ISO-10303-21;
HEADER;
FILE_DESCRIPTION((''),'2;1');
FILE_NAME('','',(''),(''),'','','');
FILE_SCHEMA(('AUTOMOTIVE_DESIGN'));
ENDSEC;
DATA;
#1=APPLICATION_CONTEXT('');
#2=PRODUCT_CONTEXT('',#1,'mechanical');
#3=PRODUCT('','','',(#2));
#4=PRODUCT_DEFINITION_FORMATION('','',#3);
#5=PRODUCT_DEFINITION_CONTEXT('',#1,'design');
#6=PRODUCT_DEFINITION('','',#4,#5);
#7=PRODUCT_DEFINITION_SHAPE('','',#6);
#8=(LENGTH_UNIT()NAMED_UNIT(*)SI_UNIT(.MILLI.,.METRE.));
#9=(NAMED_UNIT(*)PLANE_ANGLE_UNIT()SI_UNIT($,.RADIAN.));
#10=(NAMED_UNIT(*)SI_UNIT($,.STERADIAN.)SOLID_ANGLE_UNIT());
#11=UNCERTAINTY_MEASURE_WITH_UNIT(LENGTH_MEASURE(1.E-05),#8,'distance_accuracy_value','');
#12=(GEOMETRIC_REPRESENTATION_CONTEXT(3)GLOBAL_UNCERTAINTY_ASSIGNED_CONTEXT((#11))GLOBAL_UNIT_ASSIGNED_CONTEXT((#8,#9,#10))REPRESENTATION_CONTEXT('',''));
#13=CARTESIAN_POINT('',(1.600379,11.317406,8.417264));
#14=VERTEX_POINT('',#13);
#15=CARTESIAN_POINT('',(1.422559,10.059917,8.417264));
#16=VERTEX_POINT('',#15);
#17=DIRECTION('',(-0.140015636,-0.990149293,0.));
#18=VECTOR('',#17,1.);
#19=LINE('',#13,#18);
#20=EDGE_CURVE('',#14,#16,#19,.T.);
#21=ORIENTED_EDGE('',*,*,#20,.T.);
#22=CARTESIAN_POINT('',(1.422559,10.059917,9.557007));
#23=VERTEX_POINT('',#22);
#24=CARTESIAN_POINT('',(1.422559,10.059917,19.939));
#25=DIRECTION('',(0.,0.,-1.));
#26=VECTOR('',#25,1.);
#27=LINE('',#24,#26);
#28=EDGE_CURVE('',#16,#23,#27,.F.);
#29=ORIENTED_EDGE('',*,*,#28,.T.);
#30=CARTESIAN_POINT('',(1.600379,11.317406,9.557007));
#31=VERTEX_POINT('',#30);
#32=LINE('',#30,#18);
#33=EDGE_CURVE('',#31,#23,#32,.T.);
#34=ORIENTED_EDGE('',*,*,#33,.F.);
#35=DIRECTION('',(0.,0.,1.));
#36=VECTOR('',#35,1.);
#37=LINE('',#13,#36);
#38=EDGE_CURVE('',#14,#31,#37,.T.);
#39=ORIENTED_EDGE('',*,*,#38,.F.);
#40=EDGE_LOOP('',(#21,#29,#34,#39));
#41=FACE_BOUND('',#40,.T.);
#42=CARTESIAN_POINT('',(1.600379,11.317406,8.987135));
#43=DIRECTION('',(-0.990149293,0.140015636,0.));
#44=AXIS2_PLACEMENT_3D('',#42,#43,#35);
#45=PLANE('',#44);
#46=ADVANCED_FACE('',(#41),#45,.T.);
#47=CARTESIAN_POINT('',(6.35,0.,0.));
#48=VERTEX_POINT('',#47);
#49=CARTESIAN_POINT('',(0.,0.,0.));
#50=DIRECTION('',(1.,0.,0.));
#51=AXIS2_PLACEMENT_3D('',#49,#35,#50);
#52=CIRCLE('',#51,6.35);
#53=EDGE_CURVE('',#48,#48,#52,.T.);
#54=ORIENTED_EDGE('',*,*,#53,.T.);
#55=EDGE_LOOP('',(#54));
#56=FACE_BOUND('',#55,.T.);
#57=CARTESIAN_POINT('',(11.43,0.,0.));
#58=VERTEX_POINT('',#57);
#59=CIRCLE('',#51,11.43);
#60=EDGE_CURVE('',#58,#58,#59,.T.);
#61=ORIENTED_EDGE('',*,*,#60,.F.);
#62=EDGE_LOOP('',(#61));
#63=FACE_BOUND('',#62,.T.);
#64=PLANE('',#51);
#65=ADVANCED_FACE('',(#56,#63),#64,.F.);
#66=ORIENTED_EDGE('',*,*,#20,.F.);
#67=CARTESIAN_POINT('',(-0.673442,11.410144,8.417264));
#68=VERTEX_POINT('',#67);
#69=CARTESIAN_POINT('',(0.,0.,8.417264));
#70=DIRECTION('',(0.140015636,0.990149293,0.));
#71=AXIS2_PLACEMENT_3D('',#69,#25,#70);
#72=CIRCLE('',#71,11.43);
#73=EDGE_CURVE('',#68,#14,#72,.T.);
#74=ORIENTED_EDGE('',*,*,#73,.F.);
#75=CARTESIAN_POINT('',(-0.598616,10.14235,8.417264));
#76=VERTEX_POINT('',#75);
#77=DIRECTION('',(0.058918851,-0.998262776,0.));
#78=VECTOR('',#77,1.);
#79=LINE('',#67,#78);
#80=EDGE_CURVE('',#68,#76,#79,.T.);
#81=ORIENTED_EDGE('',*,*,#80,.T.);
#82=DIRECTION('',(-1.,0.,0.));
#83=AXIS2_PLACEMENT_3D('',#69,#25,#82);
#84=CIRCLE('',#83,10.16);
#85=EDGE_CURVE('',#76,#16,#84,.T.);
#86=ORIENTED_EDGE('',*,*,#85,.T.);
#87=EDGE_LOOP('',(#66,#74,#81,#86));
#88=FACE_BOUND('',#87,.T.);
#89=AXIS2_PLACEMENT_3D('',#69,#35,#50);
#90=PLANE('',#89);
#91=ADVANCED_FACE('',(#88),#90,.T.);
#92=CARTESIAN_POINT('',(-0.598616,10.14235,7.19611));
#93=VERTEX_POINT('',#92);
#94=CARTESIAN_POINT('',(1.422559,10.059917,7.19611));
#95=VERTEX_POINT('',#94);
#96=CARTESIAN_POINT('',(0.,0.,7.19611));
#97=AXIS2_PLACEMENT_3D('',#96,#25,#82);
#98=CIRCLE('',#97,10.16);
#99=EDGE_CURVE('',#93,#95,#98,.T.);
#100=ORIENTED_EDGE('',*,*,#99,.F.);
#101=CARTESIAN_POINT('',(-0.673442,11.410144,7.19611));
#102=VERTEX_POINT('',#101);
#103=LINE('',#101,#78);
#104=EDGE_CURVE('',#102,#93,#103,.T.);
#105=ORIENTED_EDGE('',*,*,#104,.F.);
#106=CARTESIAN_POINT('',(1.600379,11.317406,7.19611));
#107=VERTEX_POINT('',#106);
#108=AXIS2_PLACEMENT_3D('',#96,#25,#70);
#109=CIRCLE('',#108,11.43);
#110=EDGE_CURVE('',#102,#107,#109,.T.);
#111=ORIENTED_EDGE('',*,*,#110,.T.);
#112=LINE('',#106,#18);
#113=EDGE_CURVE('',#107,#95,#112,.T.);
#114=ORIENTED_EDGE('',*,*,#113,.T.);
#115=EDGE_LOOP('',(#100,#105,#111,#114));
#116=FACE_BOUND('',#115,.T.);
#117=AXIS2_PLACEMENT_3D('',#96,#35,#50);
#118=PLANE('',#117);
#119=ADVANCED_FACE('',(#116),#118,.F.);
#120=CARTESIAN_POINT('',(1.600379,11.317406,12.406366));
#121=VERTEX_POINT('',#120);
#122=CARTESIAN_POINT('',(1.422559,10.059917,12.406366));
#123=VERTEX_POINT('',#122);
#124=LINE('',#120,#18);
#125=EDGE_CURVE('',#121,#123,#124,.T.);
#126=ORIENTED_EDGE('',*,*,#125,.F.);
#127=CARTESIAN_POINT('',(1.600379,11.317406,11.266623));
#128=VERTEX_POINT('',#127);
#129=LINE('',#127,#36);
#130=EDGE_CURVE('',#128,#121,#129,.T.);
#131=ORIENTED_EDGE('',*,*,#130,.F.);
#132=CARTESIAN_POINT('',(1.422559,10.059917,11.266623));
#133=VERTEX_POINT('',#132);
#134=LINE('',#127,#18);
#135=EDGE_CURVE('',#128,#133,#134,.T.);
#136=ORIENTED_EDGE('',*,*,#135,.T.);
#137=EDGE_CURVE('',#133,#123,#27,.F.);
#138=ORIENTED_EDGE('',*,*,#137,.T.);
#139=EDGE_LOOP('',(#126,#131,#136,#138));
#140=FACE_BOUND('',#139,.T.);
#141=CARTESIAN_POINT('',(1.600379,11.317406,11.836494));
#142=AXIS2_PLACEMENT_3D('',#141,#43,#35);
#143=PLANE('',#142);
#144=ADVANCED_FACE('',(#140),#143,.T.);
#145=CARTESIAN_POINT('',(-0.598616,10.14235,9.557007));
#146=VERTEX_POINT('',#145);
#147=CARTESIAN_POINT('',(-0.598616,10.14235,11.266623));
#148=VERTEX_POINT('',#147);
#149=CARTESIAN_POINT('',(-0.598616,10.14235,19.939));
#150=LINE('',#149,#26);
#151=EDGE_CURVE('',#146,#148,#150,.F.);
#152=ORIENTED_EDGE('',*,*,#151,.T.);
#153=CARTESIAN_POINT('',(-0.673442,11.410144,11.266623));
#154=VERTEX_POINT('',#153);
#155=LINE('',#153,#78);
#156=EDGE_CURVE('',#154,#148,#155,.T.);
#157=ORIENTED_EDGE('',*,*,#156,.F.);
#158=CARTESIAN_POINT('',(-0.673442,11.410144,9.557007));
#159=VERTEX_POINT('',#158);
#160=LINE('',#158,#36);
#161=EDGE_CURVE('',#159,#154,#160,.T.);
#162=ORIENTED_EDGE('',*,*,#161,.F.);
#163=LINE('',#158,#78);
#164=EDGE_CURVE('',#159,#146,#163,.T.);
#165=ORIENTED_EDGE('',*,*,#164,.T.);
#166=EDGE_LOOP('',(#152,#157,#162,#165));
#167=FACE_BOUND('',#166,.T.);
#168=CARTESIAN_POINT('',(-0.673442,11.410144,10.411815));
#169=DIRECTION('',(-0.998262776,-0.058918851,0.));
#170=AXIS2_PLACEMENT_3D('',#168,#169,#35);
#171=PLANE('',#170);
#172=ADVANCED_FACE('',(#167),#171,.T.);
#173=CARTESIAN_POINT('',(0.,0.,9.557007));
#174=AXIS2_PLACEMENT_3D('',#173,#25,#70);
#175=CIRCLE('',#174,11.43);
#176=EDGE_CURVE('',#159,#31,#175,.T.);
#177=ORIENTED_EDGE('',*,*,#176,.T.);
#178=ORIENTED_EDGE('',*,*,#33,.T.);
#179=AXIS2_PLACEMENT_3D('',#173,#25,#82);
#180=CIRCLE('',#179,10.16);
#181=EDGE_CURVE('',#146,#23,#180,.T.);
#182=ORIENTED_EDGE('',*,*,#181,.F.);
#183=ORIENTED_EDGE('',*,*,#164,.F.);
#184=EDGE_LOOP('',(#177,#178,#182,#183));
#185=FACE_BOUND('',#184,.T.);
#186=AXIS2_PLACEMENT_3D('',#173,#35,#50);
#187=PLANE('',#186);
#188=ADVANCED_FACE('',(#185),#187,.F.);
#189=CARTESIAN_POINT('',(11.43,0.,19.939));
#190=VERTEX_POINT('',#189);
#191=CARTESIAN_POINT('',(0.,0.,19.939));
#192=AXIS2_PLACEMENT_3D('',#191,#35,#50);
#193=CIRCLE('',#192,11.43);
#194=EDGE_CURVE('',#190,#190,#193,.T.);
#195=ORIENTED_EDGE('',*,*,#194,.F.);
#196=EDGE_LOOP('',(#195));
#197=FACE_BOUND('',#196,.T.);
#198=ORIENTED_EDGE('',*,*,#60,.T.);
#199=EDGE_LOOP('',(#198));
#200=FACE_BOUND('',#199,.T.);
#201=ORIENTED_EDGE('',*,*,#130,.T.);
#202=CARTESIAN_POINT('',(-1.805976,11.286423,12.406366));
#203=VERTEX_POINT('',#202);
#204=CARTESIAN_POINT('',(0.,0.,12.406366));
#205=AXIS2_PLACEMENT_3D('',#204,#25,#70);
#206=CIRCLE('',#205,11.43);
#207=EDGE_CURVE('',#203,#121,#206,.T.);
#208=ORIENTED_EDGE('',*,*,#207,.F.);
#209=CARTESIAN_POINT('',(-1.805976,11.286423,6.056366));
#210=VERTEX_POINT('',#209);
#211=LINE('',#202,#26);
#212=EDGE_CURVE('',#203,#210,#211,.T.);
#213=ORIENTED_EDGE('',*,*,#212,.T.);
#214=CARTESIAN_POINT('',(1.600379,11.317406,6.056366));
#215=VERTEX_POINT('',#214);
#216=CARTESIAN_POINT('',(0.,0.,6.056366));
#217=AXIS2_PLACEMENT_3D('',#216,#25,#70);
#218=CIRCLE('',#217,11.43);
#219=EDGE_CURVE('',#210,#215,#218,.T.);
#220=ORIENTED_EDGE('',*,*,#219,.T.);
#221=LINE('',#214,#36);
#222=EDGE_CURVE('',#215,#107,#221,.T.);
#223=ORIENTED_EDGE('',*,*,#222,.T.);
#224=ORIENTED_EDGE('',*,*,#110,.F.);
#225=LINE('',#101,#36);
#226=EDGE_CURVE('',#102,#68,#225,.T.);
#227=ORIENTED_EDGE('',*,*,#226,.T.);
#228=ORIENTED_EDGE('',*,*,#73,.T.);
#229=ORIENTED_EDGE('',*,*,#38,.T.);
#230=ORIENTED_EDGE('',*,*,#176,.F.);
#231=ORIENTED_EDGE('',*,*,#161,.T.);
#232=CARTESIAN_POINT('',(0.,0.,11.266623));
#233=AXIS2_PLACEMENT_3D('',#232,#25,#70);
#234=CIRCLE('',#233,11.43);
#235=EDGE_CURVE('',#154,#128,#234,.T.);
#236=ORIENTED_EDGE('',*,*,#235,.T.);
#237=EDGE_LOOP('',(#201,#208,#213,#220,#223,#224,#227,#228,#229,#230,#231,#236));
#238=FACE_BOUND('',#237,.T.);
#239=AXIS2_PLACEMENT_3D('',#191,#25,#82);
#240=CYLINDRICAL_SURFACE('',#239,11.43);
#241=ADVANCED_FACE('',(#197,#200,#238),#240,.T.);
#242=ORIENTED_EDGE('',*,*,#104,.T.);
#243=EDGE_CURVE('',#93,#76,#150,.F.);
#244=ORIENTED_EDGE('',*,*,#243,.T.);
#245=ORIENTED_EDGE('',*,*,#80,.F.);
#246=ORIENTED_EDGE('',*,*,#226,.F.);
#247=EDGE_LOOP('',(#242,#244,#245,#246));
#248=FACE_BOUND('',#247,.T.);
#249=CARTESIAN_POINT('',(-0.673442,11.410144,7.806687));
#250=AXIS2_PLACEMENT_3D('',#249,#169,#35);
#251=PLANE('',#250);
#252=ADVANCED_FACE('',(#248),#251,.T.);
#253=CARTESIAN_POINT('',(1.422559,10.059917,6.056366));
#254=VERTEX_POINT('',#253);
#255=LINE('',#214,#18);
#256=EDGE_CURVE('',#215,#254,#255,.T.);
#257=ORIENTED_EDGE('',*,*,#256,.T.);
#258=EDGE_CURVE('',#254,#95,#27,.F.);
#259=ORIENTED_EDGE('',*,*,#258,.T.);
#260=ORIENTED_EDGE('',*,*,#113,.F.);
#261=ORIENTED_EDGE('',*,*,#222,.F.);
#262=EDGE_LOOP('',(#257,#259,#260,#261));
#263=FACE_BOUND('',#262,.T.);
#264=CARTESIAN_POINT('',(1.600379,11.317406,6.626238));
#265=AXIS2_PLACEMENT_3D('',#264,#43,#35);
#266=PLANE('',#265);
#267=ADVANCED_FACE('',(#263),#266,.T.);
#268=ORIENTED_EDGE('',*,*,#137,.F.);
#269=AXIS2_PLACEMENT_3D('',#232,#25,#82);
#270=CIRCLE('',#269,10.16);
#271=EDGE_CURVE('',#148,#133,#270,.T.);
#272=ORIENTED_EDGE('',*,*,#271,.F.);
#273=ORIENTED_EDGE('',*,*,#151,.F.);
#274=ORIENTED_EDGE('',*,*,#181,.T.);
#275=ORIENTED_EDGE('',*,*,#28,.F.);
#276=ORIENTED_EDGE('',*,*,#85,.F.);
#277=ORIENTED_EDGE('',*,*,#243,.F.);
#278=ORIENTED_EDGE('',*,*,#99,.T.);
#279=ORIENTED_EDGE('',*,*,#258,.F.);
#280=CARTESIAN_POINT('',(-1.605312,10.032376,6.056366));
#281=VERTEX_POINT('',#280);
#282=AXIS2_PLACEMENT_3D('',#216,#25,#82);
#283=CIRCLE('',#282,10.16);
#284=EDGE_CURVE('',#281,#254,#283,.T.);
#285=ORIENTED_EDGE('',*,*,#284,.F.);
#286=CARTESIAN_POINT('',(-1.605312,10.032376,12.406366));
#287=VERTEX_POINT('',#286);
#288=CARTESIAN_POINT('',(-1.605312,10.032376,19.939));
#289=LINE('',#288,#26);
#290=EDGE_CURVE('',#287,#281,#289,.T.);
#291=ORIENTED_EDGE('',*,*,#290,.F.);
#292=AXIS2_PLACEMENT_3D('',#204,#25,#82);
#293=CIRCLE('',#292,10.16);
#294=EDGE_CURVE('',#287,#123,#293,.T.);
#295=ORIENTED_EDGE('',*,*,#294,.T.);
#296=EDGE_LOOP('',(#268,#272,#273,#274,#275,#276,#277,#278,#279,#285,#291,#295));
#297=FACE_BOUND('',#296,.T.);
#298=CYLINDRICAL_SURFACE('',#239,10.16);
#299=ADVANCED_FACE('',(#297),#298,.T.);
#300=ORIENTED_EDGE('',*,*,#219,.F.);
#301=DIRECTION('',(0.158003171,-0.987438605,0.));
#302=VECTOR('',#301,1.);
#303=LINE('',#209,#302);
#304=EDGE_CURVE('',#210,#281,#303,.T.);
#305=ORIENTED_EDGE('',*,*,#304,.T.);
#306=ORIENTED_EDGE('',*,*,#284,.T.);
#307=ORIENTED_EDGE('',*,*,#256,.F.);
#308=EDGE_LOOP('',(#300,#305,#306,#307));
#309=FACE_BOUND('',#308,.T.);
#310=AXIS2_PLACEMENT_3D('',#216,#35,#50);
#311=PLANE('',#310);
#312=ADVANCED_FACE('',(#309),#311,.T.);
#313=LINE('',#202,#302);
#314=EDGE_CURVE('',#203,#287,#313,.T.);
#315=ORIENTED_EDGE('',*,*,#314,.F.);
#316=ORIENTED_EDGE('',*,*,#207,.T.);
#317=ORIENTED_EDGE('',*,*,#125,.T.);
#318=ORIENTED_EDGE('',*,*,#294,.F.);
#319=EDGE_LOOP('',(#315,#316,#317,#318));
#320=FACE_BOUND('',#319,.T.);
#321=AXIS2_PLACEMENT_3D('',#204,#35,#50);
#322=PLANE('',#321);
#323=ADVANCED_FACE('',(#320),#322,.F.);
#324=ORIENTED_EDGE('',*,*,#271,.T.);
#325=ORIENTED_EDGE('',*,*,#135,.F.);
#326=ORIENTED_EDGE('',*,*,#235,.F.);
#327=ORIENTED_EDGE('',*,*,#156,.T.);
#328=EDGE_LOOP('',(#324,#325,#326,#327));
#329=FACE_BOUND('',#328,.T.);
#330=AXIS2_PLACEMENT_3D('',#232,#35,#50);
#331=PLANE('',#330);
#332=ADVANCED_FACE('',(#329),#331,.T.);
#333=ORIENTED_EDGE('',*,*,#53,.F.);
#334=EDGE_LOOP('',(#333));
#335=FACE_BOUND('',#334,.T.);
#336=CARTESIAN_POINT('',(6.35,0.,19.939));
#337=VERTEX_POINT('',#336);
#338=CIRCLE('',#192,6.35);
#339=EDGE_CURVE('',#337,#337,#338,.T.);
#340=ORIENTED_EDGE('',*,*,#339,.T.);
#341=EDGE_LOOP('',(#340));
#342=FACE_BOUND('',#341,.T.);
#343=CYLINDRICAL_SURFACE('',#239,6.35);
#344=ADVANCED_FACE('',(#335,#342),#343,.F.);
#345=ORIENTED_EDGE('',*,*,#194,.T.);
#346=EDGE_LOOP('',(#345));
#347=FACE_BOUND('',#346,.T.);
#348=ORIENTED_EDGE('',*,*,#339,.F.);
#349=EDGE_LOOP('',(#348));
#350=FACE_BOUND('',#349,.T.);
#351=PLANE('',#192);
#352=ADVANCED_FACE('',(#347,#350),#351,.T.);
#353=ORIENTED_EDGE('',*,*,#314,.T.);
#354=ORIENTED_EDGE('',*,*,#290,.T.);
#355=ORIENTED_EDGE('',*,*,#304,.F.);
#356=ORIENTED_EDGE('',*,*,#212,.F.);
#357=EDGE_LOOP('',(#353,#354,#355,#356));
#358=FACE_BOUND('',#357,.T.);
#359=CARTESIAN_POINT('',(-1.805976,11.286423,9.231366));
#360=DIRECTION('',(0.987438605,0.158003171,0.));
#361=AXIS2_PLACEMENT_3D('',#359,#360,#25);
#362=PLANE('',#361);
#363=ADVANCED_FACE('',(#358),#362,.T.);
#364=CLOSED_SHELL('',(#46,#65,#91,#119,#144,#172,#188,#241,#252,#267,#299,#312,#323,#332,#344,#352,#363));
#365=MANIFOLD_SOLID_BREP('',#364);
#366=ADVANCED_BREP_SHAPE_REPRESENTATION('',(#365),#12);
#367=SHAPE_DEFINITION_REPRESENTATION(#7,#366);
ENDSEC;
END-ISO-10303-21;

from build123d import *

# Parameters (mm, degrees)
SKETCH1_R           = 11.43
SKETCH1_R_2         = 6.35
BOSS_EXTRUDE1_DEPTH = 19.939
WRAP1_START         = 6.056366153
WRAP1_DEPTH         = 6.35
WRAP1_2_DEPTH       = 1.13974359
WRAP1_START_2       = 8.417263589
WRAP1_3_DEPTH       = 1.13974359
WRAP1_START_3       = 11.266622564
WRAP1_4_DEPTH       = 1.139743589


# Read off the part's stored shape, not the designer's step: Wrap1
with BuildPart() as part:
    # Sketch1 → Boss-Extrude1 (new body)
    with BuildSketch(Plane.XY):
        Circle(SKETCH1_R)
        Circle(SKETCH1_R_2, mode=Mode.SUBTRACT)
    extrude(amount=BOSS_EXTRUDE1_DEPTH)

    # Wrap1 outline → Wrap1 (cut)
    with BuildSketch(Plane.XY.offset(WRAP1_START)):
        with BuildLine():
            Line((-0.598615526, 10.142349799), (-0.673442467, 11.410143524))
            ThreePointArc((-0.673442467, 11.410143524), (-1.24125177, 11.362402653), (-1.80597624, 11.286423252))
            Line((-1.80597624, 11.286423252), (-1.605312214, 10.032376224))
            ThreePointArc((-1.605312214, 10.032376224), (-1.103334907, 10.099913469), (-0.598615526, 10.142349799))
        make_face()
    extrude(amount=WRAP1_DEPTH, mode=Mode.SUBTRACT)

    # Wrap1 2 outline → Wrap1 2 (cut)
    with BuildSketch(Plane.XY.offset(WRAP1_START)):
        with BuildLine():
            Line((1.422558862, 10.059916813), (1.60037872, 11.317406415))
            ThreePointArc((1.60037872, 11.317406415), (0.465781866, 11.42050556), (-0.673442467, 11.410143524))
            Line((-0.673442467, 11.410143524), (-0.598615526, 10.142349799))
            ThreePointArc((-0.598615526, 10.142349799), (0.414028326, 10.151560498), (1.422558862, 10.059916813))
        make_face()
    extrude(amount=WRAP1_2_DEPTH, mode=Mode.SUBTRACT)

    # Wrap1 3 outline → Wrap1 3 (cut)
    with BuildSketch(Plane.XY.offset(WRAP1_START_2)):
        with BuildLine():
            Line((1.422558862, 10.059916813), (1.60037872, 11.317406415))
            ThreePointArc((1.60037872, 11.317406415), (0.465781866, 11.42050556), (-0.673442467, 11.410143524))
            Line((-0.673442467, 11.410143524), (-0.598615526, 10.142349799))
            ThreePointArc((-0.598615526, 10.142349799), (0.414028326, 10.151560498), (1.422558862, 10.059916813))
        make_face()
    extrude(amount=WRAP1_3_DEPTH, mode=Mode.SUBTRACT)

    # Wrap1 4 outline → Wrap1 4 (cut)
    with BuildSketch(Plane.XY.offset(WRAP1_START_3)):
        with BuildLine():
            Line((1.422558862, 10.059916813), (1.60037872, 11.317406415))
            ThreePointArc((1.60037872, 11.317406415), (0.465781866, 11.42050556), (-0.673442467, 11.410143524))
            Line((-0.673442467, 11.410143524), (-0.598615526, 10.142349799))
            ThreePointArc((-0.598615526, 10.142349799), (0.414028326, 10.151560498), (1.422558862, 10.059916813))
        make_face()
    extrude(amount=WRAP1_4_DEPTH, mode=Mode.SUBTRACT)


solid = part.part
